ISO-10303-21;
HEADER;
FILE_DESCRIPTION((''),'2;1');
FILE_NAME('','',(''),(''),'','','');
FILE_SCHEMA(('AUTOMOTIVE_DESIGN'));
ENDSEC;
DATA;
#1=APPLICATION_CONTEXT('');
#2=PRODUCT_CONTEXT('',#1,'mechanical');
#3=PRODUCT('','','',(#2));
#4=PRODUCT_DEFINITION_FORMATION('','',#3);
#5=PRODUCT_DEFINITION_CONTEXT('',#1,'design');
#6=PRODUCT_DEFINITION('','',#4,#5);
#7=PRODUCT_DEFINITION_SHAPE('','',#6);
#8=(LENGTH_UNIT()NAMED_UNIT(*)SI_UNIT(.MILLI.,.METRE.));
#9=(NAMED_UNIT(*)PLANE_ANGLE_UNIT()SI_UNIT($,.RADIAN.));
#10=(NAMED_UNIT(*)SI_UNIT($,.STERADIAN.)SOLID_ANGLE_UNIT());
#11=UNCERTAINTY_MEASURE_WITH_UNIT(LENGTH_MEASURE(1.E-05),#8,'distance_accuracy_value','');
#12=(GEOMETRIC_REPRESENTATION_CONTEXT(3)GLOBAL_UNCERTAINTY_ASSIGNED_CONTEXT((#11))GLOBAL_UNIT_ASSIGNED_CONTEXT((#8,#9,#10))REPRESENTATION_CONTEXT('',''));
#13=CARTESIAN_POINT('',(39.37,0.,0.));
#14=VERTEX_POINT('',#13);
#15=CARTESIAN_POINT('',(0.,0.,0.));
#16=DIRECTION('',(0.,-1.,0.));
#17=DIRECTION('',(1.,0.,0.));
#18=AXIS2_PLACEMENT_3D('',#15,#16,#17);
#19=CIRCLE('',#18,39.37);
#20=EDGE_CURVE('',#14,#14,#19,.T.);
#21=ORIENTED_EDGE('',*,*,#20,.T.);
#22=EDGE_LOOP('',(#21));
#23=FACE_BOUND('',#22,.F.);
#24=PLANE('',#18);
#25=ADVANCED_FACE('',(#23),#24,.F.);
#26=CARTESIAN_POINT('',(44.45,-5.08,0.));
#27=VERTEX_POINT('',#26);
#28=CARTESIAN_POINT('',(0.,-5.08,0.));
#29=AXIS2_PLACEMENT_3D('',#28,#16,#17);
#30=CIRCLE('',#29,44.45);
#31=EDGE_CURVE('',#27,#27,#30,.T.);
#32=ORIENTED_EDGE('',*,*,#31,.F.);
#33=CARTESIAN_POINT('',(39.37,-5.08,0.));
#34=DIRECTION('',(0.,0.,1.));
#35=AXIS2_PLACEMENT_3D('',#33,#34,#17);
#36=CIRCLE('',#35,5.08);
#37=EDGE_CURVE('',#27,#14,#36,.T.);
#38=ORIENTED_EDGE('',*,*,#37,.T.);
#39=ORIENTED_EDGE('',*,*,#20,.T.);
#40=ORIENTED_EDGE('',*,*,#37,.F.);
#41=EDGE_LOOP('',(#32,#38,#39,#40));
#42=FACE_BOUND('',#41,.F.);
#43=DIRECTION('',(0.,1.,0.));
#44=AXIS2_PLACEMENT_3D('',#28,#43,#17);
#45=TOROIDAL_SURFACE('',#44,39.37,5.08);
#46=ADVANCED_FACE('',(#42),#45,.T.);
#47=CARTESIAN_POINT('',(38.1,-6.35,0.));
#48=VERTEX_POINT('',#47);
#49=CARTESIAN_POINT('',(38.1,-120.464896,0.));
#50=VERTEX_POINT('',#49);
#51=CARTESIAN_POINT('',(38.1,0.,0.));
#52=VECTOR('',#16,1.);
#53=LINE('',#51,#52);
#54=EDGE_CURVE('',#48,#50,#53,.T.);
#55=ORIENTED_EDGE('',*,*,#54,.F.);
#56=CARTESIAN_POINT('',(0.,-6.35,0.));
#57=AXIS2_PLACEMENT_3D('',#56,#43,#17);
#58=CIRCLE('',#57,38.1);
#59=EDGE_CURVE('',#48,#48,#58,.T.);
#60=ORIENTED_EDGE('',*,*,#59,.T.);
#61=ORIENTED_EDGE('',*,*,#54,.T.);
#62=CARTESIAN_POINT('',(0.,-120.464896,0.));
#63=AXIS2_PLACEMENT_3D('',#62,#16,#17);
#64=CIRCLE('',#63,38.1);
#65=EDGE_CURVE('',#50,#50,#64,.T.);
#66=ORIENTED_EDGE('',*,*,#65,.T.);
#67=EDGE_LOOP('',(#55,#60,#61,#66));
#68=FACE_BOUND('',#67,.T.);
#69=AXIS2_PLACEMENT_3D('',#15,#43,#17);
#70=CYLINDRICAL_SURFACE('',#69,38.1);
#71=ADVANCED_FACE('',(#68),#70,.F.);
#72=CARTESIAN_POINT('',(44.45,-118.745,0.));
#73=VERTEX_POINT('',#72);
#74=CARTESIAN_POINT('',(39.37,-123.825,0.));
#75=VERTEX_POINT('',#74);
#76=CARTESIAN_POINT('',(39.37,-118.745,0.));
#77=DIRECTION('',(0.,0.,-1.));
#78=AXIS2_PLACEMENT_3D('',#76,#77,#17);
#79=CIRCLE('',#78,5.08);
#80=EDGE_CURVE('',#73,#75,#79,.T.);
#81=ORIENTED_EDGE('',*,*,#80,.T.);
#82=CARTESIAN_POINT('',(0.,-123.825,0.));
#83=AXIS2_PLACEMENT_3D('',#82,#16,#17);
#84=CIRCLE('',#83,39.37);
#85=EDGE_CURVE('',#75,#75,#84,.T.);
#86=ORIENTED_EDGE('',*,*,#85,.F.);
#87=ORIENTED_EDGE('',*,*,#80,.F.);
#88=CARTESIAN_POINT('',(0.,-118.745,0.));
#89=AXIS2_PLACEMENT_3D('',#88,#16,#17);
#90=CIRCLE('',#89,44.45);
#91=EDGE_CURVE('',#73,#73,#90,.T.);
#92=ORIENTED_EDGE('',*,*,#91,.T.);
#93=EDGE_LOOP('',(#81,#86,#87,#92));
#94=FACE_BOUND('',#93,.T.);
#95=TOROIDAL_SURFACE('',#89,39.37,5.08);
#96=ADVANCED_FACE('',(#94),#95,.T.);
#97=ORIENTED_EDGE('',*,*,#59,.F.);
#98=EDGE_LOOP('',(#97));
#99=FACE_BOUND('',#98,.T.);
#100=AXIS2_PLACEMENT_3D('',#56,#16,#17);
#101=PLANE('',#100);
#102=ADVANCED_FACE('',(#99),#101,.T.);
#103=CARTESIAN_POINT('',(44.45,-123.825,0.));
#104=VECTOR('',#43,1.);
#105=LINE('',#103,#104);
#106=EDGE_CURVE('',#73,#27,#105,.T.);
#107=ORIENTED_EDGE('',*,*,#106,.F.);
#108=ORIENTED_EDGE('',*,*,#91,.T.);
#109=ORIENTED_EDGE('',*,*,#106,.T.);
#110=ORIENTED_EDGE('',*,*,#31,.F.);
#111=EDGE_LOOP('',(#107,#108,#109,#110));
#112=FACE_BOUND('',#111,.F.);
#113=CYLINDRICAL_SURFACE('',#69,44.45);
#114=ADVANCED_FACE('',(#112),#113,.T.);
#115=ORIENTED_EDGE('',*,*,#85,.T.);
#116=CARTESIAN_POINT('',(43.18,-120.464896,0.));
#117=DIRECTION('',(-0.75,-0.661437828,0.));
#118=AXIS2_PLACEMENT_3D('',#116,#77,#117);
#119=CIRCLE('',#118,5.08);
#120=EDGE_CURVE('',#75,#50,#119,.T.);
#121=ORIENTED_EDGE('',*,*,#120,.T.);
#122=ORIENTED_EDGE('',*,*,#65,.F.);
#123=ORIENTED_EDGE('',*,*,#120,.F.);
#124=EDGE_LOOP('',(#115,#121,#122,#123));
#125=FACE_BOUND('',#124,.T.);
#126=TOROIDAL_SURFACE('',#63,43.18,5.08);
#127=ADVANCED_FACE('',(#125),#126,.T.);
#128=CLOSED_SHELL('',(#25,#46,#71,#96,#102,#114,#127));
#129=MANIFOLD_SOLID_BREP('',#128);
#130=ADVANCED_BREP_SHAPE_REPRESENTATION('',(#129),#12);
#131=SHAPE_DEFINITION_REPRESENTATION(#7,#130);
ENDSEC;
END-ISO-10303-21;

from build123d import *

# Parameters (mm, degrees)
F0_R     = 44.45
F0_R_2   = 38.1
F1_DEPTH = 123.825
F2_R     = 44.45
F3_DEPTH = 6.35
F4_R     = 5.08


# Not quite as in the source:
# - a fillet or chamfer that OpenCascade refuses, or shapes differently, is made with other operations: its cross-section is extruded or revolved along the edge and cut away or added


with BuildPart() as f1:
    # F0 (on Front) → F1 (new body)
    with BuildSketch(Plane.XZ):
        Circle(F0_R)
        Circle(F0_R_2, mode=Mode.SUBTRACT)
    extrude(amount=F1_DEPTH)

    # F2 (on Front) → F3 (join)
    with BuildSketch(Plane.XZ):
        Circle(F2_R)
    extrude(amount=F3_DEPTH)

    # F4
    f4_edges = [f1.edges().sort_by_distance(p)[0] for p in [
        (-44.45, 0, 0),
        (44.45, -61.9125, 0),
        (-44.45, -123.825, 0),
    ]]
    fillet(f4_edges, radius=F4_R)

    # F5: fillet of radius 5.08 on 2 edges, made by hand

    # F5_s1 → F5_t2 (revolve, cut)
    with BuildSketch(Plane.XY):
        with BuildLine():
            ThreePointArc((39.37, -123.825), (38.4280951188, -122.2609470592), (38.1, -120.4648958349))
            Line((38.1, -120.4648958349), (38.1, -123.825))
            Line((38.1, -123.825), (39.37, -123.825))
        make_face()
    revolve(axis=Axis((0, -123.825, 0), (0, -1, 0)), mode=Mode.SUBTRACT)


solid = f1.part
